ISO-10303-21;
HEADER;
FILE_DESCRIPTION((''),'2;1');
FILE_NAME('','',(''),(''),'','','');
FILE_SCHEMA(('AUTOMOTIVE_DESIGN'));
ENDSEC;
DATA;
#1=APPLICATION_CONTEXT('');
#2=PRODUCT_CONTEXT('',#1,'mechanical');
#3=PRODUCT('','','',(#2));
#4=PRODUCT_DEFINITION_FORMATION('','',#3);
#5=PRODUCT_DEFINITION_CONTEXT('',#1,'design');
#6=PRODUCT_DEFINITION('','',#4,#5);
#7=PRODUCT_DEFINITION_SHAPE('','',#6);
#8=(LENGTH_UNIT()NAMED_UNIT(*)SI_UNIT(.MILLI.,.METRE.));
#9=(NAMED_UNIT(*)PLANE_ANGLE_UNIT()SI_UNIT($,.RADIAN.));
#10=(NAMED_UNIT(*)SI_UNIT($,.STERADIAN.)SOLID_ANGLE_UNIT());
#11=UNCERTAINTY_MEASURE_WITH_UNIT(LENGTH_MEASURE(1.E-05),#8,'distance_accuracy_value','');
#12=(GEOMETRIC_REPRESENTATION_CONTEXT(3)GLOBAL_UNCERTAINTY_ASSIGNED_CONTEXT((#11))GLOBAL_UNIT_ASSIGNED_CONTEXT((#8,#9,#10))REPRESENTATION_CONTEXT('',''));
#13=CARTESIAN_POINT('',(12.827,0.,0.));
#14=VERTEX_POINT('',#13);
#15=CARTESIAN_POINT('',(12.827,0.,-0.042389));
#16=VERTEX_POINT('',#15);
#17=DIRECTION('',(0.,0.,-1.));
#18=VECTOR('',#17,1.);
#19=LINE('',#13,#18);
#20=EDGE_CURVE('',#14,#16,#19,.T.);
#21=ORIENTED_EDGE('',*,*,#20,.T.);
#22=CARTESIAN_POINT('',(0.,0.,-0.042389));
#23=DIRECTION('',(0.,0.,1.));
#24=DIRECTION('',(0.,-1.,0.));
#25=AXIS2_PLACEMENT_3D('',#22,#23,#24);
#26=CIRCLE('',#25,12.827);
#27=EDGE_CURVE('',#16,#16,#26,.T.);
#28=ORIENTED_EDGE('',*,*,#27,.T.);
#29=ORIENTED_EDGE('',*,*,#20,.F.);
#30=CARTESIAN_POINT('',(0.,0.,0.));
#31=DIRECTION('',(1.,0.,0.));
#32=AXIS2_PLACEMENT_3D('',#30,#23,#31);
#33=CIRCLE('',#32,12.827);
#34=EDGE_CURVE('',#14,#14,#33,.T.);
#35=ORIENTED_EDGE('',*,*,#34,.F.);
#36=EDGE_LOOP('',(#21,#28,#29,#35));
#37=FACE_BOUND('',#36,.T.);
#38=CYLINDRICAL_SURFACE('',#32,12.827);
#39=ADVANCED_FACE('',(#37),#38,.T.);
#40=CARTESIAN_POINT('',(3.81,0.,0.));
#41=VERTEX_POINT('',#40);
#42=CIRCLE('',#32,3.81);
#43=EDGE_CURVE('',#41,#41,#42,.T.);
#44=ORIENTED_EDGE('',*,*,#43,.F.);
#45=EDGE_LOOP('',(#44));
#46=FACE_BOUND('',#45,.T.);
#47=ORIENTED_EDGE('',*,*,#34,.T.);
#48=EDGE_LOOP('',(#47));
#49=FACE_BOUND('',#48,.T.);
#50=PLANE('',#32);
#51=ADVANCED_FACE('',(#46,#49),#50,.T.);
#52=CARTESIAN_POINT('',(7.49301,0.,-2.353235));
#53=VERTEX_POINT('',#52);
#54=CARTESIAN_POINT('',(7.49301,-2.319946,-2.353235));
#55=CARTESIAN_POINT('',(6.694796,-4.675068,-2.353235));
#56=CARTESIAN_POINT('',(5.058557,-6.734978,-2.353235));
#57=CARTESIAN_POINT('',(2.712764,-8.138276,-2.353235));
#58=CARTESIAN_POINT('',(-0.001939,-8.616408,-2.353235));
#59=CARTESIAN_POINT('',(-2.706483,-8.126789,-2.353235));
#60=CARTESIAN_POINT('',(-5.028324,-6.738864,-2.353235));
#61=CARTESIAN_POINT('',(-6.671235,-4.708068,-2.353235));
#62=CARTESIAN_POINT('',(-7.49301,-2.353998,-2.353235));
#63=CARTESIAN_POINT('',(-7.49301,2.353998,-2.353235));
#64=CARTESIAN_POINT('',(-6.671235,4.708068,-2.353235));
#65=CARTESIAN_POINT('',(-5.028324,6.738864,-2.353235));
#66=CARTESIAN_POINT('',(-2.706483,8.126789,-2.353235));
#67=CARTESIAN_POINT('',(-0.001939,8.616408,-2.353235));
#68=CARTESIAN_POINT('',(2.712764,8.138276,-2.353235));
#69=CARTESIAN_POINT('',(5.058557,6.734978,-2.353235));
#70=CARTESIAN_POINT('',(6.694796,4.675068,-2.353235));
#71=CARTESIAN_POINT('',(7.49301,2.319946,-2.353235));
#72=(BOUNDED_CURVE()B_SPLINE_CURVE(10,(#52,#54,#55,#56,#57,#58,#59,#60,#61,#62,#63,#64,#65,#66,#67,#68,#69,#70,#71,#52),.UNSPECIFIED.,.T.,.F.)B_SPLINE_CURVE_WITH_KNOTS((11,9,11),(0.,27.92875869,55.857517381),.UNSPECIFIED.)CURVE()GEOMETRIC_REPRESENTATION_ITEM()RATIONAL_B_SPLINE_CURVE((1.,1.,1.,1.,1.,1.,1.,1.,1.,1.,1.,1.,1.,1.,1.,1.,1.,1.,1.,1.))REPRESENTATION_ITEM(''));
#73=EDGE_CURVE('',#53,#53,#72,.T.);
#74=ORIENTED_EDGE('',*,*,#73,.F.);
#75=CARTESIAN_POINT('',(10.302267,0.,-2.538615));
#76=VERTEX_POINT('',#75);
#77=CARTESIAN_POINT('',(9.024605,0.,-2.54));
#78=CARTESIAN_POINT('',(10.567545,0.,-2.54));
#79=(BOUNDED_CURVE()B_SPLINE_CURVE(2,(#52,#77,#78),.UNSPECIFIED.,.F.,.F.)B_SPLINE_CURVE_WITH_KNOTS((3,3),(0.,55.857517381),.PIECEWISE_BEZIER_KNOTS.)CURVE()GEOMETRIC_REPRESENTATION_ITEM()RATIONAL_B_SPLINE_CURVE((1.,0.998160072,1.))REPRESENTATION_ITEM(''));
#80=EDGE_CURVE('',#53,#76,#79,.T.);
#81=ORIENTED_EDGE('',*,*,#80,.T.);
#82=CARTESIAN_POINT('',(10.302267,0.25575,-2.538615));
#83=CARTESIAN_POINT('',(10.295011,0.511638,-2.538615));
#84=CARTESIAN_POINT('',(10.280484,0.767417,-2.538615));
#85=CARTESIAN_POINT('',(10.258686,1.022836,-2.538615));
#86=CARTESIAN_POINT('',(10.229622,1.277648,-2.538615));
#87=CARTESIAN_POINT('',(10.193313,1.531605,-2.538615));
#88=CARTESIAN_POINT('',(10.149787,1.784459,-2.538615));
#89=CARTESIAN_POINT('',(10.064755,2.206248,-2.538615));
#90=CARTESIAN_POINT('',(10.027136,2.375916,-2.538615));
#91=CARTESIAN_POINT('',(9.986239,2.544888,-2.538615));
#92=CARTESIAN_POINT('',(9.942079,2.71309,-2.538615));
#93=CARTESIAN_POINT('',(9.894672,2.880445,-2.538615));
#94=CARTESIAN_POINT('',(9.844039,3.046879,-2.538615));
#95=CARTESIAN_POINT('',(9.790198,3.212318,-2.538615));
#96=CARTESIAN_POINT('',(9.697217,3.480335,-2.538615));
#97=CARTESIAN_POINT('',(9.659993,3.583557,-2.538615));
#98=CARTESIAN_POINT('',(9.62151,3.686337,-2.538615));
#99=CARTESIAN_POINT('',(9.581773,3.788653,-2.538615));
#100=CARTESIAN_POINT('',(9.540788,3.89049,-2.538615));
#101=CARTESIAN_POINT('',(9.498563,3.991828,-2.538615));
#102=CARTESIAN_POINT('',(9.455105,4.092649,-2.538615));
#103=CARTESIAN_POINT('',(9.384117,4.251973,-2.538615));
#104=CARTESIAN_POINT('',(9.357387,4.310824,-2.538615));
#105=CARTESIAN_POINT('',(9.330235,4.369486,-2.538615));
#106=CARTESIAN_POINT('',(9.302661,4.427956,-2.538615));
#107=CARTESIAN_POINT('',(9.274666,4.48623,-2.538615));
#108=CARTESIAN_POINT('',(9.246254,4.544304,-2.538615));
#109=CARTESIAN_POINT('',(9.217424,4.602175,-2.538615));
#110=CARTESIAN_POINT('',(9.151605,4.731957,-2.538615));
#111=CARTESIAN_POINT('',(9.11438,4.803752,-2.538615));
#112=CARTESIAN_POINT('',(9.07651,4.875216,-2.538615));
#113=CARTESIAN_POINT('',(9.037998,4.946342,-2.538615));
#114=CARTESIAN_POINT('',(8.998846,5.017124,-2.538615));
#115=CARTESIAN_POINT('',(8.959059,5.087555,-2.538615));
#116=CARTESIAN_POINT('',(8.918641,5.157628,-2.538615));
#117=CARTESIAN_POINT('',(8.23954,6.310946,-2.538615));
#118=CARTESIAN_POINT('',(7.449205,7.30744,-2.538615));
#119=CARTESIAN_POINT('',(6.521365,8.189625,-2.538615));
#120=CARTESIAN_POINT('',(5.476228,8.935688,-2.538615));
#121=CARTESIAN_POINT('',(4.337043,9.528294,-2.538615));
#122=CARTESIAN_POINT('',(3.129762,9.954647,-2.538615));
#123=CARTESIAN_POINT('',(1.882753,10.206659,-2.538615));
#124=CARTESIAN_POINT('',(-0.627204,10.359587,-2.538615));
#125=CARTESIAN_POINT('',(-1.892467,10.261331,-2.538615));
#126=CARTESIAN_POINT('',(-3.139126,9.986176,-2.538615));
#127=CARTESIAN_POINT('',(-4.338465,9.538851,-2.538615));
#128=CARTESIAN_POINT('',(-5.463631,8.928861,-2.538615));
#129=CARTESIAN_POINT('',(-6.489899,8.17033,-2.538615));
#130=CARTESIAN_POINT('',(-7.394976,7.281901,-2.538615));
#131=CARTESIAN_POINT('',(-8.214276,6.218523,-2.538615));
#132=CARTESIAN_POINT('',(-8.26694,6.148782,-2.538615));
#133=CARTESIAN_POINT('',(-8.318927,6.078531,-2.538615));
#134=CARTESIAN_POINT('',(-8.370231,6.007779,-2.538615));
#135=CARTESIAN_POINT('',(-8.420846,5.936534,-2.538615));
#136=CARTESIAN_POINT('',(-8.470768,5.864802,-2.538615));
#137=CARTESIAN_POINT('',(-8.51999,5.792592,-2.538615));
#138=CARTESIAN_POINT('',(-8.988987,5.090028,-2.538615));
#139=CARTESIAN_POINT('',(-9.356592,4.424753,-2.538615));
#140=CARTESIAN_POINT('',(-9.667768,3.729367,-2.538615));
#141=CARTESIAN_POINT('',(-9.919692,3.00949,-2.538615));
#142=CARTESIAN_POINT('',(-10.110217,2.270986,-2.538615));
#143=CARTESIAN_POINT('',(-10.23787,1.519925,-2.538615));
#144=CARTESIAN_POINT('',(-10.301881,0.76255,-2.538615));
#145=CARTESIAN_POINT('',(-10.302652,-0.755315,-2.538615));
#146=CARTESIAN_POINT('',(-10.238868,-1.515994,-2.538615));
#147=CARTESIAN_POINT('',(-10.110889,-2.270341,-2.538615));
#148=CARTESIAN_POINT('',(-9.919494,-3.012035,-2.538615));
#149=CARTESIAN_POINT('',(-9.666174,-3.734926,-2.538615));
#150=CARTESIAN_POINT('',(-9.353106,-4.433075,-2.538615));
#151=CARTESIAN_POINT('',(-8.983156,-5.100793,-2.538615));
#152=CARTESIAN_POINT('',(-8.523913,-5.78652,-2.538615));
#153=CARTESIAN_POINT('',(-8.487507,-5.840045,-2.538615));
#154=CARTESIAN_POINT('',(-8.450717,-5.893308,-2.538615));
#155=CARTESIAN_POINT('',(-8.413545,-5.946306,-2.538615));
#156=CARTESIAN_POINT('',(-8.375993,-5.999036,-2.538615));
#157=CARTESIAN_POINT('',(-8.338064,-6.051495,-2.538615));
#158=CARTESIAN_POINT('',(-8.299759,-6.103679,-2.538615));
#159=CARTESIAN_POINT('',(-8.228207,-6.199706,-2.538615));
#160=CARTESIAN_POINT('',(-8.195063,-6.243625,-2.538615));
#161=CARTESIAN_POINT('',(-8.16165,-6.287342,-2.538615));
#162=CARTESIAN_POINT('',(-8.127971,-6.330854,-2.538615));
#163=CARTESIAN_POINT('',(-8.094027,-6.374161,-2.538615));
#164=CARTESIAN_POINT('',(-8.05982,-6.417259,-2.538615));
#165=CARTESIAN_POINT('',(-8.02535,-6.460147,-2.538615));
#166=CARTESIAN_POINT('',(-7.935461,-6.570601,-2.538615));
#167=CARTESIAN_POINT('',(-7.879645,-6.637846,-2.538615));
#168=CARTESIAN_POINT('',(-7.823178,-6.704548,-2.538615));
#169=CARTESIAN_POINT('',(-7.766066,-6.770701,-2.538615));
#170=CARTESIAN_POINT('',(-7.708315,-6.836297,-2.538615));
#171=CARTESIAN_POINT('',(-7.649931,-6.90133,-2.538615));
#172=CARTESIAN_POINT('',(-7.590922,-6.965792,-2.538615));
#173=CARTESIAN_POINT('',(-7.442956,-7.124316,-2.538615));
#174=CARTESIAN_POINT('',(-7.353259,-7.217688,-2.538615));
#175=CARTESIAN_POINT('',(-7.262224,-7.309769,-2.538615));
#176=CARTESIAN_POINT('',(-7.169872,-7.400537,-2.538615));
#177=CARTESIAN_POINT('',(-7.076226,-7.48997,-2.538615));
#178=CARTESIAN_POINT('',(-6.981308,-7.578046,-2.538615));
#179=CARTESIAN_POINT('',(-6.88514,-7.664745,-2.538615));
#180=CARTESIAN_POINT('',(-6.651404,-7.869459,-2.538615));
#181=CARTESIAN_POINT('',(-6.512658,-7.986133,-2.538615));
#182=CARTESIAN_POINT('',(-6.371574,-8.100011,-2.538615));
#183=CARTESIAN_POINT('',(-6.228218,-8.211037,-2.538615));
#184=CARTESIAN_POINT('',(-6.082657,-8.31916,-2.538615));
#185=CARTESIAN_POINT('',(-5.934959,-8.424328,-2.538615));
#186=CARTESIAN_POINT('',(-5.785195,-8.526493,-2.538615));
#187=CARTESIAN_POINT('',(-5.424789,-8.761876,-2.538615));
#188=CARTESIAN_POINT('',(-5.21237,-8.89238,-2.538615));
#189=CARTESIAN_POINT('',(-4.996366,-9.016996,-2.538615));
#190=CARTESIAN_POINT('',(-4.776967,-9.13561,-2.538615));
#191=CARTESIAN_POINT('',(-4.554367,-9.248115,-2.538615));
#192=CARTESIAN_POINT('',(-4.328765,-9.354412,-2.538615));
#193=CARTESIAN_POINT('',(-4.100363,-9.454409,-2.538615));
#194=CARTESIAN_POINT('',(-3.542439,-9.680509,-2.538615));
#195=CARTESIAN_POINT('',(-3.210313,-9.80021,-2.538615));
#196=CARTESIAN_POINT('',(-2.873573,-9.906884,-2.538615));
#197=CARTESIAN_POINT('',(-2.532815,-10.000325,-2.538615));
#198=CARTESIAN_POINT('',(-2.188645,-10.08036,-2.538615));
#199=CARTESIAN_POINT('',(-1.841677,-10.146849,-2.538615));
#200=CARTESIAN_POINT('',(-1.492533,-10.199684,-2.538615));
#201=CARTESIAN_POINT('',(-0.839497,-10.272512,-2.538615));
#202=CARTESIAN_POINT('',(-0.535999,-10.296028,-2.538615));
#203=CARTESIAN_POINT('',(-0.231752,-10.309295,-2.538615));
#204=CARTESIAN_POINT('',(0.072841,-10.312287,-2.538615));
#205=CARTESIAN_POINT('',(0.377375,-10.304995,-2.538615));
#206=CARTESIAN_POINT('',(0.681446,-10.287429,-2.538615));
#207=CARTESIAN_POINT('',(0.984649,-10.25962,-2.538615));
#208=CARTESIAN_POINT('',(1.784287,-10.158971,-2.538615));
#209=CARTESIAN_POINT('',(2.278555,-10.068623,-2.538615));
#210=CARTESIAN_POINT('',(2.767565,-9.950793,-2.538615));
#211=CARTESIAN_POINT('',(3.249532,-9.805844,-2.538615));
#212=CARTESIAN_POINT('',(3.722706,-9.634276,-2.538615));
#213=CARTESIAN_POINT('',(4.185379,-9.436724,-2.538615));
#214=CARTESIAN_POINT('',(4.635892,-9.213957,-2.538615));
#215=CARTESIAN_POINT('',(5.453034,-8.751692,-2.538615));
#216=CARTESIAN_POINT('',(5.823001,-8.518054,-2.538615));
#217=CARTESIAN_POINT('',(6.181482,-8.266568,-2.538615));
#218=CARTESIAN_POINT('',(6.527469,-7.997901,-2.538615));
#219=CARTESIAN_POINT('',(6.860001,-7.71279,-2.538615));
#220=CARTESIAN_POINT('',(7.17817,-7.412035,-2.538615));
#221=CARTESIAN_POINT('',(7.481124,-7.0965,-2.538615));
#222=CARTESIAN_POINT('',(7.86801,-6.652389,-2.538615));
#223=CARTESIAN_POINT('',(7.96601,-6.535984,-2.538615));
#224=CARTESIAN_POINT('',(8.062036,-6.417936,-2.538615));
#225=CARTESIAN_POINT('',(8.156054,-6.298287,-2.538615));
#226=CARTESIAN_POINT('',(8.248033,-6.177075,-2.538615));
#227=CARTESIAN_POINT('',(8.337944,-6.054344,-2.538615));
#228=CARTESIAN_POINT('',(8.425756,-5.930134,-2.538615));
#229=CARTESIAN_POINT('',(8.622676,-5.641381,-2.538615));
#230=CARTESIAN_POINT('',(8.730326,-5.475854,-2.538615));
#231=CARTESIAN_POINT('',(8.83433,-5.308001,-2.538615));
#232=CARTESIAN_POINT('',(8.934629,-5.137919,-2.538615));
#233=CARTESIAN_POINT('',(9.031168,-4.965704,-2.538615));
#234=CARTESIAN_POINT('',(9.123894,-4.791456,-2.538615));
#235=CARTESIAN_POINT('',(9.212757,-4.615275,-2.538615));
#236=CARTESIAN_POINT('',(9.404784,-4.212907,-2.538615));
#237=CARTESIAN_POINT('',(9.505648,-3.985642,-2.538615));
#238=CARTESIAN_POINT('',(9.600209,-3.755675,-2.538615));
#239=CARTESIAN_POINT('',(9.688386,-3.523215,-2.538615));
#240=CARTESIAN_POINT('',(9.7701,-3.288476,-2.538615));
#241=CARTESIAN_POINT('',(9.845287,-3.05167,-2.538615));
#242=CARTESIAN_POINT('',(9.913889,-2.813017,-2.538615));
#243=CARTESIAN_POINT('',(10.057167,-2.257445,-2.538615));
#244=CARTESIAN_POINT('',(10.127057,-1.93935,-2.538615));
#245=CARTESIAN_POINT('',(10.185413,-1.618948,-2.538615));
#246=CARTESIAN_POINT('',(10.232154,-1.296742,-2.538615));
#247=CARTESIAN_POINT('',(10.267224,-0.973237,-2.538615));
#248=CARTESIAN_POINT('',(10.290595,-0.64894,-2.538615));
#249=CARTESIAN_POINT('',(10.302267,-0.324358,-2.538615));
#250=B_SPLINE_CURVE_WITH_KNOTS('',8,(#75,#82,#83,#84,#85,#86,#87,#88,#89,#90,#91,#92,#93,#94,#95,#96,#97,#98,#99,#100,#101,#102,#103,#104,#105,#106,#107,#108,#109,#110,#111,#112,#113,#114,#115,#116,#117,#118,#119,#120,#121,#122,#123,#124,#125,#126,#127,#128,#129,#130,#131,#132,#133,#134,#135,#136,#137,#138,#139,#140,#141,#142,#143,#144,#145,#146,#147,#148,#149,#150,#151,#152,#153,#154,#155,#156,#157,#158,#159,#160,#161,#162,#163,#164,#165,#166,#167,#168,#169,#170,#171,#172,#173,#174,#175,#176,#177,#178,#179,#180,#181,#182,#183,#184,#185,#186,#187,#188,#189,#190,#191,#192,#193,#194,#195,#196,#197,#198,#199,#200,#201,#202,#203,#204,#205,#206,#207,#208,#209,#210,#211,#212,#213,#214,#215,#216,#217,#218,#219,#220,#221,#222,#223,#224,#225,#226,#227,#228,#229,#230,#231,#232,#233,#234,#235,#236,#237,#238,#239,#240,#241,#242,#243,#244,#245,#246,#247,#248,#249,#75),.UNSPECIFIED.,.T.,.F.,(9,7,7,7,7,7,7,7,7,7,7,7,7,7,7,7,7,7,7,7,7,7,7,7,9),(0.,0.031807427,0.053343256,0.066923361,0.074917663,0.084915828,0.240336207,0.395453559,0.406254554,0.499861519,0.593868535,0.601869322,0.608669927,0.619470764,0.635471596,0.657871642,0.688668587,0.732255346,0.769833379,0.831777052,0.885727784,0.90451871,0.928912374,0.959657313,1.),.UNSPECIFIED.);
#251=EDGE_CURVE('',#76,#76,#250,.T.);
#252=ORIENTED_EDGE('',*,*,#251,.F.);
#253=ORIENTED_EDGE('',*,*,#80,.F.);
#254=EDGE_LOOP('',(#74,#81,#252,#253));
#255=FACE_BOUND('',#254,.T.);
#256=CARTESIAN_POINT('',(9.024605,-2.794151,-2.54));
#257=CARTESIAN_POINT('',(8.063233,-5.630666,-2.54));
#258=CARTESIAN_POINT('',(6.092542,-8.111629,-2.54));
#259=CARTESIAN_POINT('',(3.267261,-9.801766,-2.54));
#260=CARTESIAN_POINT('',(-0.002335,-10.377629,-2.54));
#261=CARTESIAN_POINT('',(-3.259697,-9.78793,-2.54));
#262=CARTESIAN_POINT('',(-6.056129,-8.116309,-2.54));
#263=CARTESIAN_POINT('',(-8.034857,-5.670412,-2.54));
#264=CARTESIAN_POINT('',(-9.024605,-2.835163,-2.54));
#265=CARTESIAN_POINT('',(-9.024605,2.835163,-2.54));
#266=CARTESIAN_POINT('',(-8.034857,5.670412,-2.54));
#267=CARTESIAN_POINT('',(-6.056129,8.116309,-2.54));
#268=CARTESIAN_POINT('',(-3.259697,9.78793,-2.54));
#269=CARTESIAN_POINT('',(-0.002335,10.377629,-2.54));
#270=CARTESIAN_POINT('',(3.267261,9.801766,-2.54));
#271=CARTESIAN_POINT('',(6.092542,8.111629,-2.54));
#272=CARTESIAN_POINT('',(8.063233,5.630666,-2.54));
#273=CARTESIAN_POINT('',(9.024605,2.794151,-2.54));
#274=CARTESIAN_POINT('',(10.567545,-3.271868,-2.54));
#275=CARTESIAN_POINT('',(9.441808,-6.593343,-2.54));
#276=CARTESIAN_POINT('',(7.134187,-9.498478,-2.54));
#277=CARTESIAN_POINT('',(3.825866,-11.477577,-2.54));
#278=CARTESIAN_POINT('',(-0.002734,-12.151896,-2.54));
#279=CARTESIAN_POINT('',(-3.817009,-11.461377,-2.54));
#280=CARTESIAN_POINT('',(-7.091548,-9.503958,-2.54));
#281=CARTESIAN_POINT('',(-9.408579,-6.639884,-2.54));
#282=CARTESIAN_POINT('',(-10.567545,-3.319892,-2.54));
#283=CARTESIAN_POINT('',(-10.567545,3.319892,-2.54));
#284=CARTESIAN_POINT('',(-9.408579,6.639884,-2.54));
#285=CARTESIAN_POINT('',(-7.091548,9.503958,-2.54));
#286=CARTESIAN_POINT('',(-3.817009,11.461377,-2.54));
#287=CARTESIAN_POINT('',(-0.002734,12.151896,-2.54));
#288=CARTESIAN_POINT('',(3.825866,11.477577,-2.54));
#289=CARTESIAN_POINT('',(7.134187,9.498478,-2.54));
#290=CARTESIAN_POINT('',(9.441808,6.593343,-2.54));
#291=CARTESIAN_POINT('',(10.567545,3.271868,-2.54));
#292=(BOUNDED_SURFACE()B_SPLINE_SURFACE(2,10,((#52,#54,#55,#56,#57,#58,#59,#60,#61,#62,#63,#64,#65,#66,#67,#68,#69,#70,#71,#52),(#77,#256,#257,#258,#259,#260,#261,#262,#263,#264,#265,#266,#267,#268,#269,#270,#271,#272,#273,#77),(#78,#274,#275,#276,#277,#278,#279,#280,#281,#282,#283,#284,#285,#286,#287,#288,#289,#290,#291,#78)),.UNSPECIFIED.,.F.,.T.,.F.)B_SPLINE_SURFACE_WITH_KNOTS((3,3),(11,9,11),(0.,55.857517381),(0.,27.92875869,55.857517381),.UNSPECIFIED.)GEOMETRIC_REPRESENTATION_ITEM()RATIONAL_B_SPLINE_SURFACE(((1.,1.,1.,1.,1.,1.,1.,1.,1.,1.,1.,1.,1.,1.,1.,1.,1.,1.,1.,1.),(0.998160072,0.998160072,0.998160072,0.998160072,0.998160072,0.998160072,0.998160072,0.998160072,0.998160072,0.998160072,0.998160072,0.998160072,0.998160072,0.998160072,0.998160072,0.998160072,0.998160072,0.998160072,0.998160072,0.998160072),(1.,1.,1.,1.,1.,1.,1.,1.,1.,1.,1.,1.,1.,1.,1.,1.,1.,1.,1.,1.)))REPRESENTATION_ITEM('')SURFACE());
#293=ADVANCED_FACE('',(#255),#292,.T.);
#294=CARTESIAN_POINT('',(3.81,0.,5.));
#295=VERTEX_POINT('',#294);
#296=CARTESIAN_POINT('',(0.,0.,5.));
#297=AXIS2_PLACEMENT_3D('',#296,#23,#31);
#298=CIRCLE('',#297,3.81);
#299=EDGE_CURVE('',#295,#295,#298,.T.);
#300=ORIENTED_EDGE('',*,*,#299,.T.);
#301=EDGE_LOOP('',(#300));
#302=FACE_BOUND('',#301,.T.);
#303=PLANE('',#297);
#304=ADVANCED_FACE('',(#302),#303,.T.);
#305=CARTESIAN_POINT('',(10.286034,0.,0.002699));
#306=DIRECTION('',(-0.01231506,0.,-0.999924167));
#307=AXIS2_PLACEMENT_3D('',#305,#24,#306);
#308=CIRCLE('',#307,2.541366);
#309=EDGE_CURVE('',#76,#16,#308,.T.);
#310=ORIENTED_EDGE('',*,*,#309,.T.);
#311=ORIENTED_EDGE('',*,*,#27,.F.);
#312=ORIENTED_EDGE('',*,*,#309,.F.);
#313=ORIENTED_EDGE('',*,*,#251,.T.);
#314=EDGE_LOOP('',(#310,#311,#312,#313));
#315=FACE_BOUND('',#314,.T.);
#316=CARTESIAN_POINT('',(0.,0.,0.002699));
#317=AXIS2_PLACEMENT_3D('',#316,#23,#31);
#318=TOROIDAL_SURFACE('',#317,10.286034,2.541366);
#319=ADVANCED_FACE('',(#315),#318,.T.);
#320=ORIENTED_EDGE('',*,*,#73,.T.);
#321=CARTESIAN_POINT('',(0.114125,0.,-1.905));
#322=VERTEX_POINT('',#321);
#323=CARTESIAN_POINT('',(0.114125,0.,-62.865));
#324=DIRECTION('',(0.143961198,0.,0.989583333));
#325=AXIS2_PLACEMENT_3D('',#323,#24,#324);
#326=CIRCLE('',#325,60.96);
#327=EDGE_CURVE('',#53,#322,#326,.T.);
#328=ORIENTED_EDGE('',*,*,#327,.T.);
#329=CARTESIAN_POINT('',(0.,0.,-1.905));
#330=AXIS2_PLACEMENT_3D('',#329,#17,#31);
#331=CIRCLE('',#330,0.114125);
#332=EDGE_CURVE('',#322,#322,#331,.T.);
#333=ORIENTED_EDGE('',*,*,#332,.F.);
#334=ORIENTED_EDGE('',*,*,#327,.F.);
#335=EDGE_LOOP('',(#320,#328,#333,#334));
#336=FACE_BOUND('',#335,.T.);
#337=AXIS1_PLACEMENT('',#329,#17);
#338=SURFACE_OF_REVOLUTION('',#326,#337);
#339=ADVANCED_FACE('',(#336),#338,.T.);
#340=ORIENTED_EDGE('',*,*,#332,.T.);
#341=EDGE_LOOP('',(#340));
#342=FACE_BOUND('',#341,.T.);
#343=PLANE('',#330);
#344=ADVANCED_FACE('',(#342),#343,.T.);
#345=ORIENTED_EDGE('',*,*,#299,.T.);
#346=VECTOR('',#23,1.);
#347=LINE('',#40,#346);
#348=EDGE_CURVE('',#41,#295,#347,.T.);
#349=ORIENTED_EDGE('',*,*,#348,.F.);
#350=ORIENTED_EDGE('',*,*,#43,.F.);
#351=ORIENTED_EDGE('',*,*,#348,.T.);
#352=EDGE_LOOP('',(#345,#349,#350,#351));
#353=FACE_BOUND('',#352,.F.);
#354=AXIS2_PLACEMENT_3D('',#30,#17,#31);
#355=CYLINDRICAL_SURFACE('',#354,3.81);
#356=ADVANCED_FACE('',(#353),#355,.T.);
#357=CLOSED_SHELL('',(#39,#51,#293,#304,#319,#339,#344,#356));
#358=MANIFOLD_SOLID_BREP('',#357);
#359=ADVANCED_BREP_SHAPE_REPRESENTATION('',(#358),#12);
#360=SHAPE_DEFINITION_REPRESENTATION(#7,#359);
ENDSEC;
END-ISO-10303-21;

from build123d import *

# Parameters (mm, degrees)
F0_R     = 12.827
F1_DEPTH = 2.54
F2_R     = 8.89
F3_DEPTH = 0.635
F5_R     = 25.4
F7_R     = 3.81
F8_DEPTH = 5


# Not quite as in the source:
# - a fillet or chamfer that OpenCascade refuses, or shapes differently, is made with other operations: its cross-section is extruded or revolved along the edge and cut away or added


with BuildPart() as f1:
    # F0 (on Top) → F1 (new body)
    with BuildSketch(Plane.XY):
        Circle(F0_R)
    extrude(amount=-F1_DEPTH)

    # F2 (on face) → F3 (cut)
    with BuildSketch(Plane(origin=(0, 0, -2.54), x_dir=(1, 0, 0), z_dir=(0, 0, -1))):
        Circle(F2_R)
    extrude(amount=-F3_DEPTH, mode=Mode.SUBTRACT)

    # F4: fillet of radius 60.96 on 1 edges, made by hand

    # F4_s1 → F4_t2 (revolve)
    with BuildSketch(Plane.XZ):
        with BuildLine():
            ThreePointArc((8.89, -2.54), (4.5135344509, -2.0639572458), (0.1141253997, -1.905))
            Line((0.1141253997, -1.905), (8.89, -1.905))
            Line((8.89, -1.905), (8.89, -2.54))
        make_face()
    revolve(axis=Axis((0, 0, -1.905), (0, 0, -1)))

    # F5
    f5_edges = [f1.edges().sort_by_distance(p)[0] for p in [
        (-8.89, 0, -2.54),
    ]]
    fillet(f5_edges, radius=F5_R)

    # F6: fillet of radius 2.54 on 1 edges, made by hand

    # F6_s1 → F6_t2 (revolve, cut)
    with BuildSketch(Plane.XZ):
        with BuildLine():
            ThreePointArc((10.2547372433, -2.5384738057), (12.0719517601, -1.8053490766), (12.8274, 0.0026991598))
            Line((12.8274, 0.0026991598), (13.0815365685, 0.0026991598))
            ThreePointArc((13.0815365685, 0.0026991598), (13.0811365685, -1.2686504201), (13.0811365685, -2.54))
            Line((13.0811365685, -2.54), (12.827, -2.7941365685))
            ThreePointArc((12.827, -2.7941365685), (10.5675446967, -2.7941365685), (10.2516075362, -2.7925911022))
            Line((10.2516075362, -2.7925911022), (10.2547372433, -2.5384738057))
        make_face()
    revolve(axis=Axis((0, 0, -2.54), (0, 0, 1)), mode=Mode.SUBTRACT)

    # F7 (on face) → F8 (join)
    with BuildSketch(Plane.XY):
        Circle(F7_R)
    extrude(amount=F8_DEPTH)


solid = f1.part
